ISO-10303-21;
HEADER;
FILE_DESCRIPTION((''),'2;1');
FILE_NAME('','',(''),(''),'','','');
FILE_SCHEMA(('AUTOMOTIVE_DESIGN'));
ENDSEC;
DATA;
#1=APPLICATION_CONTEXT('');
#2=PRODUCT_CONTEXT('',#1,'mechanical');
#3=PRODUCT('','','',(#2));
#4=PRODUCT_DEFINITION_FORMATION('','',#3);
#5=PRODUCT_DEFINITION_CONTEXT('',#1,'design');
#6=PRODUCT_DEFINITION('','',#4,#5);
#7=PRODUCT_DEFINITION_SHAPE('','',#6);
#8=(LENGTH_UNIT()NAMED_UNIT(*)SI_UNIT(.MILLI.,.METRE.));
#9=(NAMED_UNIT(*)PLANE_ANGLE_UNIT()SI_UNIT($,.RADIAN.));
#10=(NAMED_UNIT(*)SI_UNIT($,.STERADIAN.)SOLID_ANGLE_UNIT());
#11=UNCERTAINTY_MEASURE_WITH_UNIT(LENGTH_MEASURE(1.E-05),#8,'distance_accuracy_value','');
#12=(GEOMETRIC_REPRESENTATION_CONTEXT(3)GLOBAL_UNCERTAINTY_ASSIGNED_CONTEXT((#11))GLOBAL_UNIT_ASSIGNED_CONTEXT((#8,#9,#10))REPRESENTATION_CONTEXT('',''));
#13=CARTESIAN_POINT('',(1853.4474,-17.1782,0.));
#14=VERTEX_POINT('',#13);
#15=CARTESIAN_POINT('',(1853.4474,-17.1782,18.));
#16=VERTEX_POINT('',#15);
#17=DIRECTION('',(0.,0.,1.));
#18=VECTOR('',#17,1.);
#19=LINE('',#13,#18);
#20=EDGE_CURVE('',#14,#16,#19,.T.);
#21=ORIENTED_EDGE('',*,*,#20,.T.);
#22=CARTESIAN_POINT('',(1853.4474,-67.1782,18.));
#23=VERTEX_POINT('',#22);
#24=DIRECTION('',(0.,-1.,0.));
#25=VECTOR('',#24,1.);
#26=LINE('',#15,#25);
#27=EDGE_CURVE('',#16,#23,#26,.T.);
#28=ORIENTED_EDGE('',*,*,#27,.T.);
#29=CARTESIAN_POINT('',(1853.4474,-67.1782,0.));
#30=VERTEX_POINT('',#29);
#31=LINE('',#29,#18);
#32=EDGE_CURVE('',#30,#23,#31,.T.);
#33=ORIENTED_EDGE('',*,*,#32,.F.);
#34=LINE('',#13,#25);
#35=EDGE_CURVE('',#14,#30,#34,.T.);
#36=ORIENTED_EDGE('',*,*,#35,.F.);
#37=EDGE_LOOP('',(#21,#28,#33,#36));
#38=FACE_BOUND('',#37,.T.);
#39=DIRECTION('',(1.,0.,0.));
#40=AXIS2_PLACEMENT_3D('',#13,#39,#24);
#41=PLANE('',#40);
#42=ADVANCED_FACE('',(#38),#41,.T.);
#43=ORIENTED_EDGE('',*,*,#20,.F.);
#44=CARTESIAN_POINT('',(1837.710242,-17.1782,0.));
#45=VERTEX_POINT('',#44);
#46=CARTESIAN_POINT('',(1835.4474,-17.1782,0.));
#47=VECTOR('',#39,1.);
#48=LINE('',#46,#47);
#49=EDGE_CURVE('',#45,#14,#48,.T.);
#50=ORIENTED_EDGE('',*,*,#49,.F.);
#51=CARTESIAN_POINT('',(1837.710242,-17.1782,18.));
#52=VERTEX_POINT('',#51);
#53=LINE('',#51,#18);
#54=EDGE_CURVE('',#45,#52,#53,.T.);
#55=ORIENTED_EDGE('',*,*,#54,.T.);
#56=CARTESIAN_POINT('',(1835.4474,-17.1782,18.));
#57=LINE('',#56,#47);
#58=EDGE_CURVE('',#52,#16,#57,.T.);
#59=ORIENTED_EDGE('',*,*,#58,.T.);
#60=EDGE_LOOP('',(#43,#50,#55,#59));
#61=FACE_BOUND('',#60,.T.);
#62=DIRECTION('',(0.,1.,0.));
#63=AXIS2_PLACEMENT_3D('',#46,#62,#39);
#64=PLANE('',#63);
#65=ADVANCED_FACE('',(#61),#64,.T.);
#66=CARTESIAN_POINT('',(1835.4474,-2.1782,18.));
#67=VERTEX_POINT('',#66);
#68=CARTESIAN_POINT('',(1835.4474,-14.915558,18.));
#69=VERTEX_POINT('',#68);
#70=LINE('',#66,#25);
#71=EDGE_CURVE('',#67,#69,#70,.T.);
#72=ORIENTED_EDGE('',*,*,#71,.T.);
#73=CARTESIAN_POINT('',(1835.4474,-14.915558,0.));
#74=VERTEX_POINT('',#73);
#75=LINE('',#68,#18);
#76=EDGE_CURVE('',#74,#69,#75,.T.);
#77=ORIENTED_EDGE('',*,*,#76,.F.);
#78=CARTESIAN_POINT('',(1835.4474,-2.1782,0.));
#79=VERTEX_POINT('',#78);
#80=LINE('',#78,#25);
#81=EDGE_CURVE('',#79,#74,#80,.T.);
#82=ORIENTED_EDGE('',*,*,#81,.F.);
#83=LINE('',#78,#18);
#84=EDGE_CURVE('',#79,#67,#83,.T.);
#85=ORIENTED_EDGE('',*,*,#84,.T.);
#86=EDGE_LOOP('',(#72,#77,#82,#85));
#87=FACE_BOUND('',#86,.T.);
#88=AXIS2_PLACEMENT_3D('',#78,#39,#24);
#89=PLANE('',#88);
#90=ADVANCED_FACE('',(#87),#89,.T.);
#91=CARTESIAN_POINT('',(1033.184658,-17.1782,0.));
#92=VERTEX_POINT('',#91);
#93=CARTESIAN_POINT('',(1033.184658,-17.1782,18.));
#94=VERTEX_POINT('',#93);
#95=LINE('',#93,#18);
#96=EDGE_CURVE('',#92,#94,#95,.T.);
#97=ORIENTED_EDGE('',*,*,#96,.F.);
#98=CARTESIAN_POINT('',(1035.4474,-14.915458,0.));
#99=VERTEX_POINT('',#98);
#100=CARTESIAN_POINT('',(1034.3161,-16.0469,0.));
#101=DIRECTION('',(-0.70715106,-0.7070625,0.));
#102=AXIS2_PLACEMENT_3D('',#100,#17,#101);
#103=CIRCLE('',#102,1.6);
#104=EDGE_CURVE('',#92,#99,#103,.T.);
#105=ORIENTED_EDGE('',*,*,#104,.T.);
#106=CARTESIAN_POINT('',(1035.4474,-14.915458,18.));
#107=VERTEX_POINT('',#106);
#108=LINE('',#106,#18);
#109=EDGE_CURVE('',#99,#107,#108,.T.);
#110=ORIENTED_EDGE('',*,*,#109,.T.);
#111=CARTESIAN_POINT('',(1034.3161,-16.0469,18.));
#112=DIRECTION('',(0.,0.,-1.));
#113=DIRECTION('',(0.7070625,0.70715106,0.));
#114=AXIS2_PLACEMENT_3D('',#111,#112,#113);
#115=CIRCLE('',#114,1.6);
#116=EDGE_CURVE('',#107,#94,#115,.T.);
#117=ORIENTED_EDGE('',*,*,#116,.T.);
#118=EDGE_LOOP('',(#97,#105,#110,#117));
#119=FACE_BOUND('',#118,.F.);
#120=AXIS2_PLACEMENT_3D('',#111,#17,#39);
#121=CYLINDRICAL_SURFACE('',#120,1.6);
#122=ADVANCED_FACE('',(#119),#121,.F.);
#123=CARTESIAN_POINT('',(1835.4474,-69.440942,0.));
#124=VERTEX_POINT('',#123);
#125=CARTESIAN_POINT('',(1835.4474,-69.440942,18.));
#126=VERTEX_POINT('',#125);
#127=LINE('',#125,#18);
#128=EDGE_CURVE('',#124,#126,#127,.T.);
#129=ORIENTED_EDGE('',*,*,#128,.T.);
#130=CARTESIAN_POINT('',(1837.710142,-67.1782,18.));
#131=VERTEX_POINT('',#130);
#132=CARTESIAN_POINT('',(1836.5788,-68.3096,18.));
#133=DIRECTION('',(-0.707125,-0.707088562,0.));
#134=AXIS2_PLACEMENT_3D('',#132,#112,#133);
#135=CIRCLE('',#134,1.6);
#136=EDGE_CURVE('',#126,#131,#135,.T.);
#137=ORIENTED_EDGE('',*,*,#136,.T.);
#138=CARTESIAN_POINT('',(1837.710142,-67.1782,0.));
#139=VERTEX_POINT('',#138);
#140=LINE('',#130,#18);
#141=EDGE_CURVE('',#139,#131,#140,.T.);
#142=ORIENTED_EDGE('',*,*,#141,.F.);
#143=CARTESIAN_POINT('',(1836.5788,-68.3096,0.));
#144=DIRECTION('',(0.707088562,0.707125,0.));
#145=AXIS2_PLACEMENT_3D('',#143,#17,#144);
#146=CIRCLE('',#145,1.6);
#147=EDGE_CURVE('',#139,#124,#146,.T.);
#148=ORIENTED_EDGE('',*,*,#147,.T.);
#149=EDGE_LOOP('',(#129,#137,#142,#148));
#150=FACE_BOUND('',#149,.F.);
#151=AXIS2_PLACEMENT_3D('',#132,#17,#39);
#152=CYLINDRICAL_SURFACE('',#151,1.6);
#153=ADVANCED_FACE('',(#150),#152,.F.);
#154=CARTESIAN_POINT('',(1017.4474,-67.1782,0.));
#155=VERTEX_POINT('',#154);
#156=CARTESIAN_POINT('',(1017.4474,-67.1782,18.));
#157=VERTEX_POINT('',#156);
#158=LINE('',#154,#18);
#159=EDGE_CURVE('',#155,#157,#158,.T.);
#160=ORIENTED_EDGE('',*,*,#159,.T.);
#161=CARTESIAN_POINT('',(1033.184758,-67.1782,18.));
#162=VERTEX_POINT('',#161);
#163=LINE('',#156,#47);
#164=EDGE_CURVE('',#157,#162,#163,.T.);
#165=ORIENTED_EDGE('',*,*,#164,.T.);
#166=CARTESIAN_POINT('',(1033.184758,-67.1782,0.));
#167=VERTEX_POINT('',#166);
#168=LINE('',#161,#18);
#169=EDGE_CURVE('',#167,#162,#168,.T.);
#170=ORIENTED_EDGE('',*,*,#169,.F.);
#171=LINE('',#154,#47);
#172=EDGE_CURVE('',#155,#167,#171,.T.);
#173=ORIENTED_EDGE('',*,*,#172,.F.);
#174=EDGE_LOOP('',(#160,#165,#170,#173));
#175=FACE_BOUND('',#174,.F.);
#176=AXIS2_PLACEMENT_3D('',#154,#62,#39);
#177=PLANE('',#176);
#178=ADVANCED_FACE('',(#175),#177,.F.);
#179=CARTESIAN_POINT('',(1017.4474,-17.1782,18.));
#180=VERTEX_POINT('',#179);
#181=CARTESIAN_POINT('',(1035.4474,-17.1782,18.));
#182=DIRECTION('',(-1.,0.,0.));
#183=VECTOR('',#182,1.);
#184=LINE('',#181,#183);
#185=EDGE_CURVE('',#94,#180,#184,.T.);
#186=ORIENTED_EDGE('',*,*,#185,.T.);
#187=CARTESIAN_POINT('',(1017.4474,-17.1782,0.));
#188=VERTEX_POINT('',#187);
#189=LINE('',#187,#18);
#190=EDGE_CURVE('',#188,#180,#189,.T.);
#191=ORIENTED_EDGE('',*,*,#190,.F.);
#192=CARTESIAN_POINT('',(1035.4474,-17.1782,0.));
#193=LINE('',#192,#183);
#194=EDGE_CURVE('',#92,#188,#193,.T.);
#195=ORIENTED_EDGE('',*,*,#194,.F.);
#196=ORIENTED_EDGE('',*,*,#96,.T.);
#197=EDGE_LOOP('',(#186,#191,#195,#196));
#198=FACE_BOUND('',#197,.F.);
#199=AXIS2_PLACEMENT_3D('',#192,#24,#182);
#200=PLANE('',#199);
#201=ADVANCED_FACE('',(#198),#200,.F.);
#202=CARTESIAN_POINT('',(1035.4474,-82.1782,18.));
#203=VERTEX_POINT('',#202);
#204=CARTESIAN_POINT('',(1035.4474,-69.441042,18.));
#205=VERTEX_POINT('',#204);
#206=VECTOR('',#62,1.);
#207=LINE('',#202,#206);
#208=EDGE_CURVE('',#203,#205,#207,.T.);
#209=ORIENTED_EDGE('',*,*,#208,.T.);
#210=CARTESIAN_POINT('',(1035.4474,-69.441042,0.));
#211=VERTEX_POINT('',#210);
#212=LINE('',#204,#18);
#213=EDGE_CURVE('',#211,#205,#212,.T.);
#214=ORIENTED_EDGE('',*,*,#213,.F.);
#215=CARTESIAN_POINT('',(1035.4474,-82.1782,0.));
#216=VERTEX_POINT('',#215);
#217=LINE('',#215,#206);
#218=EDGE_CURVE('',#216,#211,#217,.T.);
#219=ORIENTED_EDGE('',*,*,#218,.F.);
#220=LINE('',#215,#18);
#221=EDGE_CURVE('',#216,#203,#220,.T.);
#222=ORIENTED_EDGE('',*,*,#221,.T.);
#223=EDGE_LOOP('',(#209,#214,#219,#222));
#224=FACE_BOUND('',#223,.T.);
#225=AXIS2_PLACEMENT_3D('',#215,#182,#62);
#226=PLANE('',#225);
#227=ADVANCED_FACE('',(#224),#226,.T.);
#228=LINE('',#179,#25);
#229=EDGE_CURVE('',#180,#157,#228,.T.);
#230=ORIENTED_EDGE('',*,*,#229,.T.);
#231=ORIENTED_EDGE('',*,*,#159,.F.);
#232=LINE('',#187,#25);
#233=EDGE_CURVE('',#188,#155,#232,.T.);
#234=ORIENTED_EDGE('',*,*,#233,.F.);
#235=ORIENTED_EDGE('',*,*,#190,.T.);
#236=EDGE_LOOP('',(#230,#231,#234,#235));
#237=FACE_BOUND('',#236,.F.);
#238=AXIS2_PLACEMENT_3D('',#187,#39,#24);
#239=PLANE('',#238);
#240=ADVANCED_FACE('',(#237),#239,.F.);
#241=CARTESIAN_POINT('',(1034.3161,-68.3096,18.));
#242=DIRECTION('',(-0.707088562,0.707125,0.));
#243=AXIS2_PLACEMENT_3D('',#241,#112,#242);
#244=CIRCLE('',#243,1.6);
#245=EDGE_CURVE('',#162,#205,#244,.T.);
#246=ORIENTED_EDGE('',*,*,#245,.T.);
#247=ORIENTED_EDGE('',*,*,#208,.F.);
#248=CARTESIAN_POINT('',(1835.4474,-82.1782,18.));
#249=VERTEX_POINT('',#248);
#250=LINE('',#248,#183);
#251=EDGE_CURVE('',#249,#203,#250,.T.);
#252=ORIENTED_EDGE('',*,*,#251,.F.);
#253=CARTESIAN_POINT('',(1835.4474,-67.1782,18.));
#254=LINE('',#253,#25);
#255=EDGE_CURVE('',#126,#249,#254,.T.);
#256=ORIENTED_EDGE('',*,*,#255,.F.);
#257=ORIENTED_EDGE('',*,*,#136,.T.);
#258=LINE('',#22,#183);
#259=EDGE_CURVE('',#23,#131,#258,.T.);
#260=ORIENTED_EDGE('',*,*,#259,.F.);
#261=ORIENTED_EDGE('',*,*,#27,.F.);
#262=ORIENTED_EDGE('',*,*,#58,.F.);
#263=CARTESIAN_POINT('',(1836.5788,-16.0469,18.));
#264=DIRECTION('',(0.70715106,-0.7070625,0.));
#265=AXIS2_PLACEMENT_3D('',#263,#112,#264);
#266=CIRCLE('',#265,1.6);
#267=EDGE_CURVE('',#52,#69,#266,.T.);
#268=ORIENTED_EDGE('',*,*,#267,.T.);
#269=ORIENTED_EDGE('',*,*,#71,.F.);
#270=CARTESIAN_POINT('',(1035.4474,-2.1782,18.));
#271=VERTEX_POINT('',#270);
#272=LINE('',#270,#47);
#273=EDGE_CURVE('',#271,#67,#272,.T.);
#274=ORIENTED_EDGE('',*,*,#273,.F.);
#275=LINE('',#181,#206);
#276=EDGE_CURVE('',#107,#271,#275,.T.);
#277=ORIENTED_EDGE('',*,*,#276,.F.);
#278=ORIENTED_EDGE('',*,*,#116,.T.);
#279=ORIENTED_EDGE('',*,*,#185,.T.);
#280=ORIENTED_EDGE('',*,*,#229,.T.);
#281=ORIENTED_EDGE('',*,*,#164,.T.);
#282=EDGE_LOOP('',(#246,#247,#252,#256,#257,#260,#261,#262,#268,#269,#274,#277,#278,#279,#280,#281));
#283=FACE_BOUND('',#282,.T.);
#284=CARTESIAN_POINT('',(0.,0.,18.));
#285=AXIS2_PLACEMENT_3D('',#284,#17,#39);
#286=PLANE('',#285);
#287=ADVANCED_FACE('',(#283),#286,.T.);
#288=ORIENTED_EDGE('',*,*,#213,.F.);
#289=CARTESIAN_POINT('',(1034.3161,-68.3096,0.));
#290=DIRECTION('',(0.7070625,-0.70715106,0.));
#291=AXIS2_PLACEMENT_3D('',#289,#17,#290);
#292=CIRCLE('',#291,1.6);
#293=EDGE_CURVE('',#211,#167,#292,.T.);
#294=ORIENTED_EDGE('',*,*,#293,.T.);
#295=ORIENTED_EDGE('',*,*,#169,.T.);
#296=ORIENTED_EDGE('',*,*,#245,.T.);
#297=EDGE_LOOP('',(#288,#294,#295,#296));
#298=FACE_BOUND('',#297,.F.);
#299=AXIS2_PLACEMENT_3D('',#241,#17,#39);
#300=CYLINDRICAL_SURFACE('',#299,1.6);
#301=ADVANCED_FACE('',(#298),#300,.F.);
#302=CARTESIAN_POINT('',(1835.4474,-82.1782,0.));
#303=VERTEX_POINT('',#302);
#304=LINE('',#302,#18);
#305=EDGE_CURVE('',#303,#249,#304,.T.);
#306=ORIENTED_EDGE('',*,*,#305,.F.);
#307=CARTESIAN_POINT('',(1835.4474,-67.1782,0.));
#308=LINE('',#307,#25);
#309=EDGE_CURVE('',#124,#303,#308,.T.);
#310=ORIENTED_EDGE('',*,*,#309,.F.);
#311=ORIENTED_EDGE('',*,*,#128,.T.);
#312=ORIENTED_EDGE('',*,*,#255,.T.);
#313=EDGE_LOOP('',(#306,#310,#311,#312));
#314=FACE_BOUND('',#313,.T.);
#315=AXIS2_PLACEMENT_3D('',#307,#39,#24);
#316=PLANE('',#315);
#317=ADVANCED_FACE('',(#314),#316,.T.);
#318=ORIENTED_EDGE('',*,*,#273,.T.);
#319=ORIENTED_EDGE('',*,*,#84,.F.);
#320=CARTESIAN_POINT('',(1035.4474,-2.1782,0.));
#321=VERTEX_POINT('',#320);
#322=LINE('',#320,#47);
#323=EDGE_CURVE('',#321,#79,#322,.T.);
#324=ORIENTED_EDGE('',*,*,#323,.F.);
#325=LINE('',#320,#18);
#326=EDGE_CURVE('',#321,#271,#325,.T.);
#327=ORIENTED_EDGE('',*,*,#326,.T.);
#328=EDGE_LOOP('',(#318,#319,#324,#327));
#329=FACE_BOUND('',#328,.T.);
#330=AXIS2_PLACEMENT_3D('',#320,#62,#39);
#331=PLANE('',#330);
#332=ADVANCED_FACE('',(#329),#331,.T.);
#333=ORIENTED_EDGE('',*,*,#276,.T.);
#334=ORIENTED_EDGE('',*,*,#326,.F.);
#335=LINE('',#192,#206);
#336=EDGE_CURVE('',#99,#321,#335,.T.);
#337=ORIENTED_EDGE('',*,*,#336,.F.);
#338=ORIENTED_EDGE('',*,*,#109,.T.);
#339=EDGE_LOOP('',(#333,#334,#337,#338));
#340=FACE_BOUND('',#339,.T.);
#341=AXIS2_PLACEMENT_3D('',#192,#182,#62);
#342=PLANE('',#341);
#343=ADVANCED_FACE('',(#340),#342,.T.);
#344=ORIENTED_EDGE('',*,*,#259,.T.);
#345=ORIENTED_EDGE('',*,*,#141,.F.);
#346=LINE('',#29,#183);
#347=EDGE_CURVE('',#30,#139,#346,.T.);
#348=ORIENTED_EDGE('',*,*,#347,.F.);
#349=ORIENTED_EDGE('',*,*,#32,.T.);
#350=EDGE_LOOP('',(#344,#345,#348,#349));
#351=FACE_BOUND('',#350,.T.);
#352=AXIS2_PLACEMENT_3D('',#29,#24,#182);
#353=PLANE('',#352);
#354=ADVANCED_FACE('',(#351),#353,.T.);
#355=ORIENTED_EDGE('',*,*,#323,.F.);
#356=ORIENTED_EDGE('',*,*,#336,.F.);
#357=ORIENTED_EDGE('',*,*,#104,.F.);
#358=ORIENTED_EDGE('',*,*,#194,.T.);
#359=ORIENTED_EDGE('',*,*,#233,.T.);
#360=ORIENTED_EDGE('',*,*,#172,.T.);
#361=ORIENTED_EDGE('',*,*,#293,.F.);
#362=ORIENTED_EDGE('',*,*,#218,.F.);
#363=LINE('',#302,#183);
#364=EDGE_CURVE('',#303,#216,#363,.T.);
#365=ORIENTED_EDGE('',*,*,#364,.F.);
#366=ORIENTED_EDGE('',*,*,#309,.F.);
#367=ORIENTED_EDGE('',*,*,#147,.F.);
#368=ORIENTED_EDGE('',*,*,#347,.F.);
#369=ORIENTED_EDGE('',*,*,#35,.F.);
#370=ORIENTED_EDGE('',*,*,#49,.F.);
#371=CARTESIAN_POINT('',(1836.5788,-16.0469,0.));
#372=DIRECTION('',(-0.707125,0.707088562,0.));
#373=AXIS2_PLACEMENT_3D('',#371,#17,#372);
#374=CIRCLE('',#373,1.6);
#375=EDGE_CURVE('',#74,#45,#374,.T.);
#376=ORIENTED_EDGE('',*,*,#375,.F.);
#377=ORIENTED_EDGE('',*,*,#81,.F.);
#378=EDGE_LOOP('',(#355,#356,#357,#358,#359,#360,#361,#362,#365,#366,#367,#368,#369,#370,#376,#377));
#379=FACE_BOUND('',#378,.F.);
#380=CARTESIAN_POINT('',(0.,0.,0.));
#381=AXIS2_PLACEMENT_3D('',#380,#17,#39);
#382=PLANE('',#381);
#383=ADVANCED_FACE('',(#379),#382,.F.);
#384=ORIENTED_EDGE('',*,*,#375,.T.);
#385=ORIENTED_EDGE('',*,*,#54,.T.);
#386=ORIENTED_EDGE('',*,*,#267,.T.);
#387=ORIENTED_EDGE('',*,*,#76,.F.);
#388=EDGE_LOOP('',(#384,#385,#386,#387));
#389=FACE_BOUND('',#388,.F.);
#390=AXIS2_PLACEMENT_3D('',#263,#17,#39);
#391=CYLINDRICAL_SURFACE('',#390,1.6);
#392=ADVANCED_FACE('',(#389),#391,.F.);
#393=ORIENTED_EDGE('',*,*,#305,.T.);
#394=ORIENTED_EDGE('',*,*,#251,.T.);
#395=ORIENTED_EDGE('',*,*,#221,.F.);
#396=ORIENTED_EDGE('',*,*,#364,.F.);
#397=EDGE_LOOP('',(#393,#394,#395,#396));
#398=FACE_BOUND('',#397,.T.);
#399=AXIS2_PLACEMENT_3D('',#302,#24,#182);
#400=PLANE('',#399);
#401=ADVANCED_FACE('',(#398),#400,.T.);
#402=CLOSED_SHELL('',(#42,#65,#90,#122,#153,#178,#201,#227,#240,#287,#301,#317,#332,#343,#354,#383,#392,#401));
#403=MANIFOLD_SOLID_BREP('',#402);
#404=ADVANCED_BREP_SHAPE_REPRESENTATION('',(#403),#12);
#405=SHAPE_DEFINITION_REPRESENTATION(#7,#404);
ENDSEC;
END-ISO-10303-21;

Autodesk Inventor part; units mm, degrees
ref_plane "YZ Plane" through (0, 0, 0) normal (1, 0, 0) x (0, 1, 0)
ref_plane "XZ Plane" through (0, 0, 0) normal (0, 1, 0) x (-1, 0, 0)
ref_plane "XY Plane" through (0, 0, 0) normal (0, 0, 1) x (1, 0, 0)
sketch "Sketch1" plane through (0, 0, 0) normal (0, 0, 1) x (1, 0, 0)
  line L0 (1035.4474, -2.1782) -> (1835.4474, -2.1782)
  line L1 (1835.4474, -82.1782) -> (1035.4474, -82.1782)
  line L2 (1035.4474, -17.1782) -> (1017.4474, -17.1782)
  line L3 (1017.4474, -17.1782) -> (1017.4474, -67.1782)
  line L4 (1017.4474, -67.1782) -> (1035.4474, -67.1782)
  line L5 (1835.4474, -17.1782) -> (1853.4474, -17.1782)
  line L6 (1853.4474, -17.1782) -> (1853.4474, -67.1782)
  line L7 (1853.4474, -67.1782) -> (1835.4474, -67.1782)
  line L8 (1835.4474, -2.1782) -> (1835.4474, -17.1782)
  line L9 (1835.4474, -67.1782) -> (1835.4474, -82.1782)
  line L10 (1035.4474, -82.1782) -> (1035.4474, -67.1782)
  line L11 (1035.4474, -17.1782) -> (1035.4474, -2.1782)
  point P0 (0, 0)
  dimension "d10" = 800
  dimension "d11" = 80
  dimension "d12" = 50
  dimension "d13" = 18
  dimension "d14" = 50
  dimension "d15" = 18
  dimension "d19" = 15
  dimension "d20" = 800
  dimension "d21" = 18
extrude "Extrusion1" add sketch "Sketch1" along normal blind 18
sketch "Sketch2" plane through (0, 0, 18) normal (0, 0, 1) x (1, 0, 0)
  line L0 (1035.4474, -17.1782) -> (1034.3161, -16.0469)
  line L1 (1035.4474, -17.1782) -> (1037.0474, -17.1782) construction
  line L2 (1035.4474, -67.1782) -> (1034.3161, -68.3096)
  line L3 (1835.4474, -17.1782) -> (1836.5788, -16.0469)
  line L4 (1835.4474, -67.1782) -> (1836.5788, -68.3096)
  circle A0 centre (1836.5788, -68.3096) radius 1.6
  circle A1 centre (1836.5788, -16.0469) radius 1.6
  circle A2 centre (1034.3161, -68.3096) radius 1.6
  circle A3 centre (1034.3161, -16.0469) radius 1.6
  point P0 (0, 0)
  dimension "d22" = 1.6
  dimension "d23" = 135
  dimension "d24" = 3.2
  dimension "d25" = 3.2
  dimension "d26" = 3.2
  dimension "d27" = 3.2
extrude "Extrusion2" cut sketch "Sketch2" against normal blind 20
properties part number "viga diagonal" material "Wood (Birch)"
